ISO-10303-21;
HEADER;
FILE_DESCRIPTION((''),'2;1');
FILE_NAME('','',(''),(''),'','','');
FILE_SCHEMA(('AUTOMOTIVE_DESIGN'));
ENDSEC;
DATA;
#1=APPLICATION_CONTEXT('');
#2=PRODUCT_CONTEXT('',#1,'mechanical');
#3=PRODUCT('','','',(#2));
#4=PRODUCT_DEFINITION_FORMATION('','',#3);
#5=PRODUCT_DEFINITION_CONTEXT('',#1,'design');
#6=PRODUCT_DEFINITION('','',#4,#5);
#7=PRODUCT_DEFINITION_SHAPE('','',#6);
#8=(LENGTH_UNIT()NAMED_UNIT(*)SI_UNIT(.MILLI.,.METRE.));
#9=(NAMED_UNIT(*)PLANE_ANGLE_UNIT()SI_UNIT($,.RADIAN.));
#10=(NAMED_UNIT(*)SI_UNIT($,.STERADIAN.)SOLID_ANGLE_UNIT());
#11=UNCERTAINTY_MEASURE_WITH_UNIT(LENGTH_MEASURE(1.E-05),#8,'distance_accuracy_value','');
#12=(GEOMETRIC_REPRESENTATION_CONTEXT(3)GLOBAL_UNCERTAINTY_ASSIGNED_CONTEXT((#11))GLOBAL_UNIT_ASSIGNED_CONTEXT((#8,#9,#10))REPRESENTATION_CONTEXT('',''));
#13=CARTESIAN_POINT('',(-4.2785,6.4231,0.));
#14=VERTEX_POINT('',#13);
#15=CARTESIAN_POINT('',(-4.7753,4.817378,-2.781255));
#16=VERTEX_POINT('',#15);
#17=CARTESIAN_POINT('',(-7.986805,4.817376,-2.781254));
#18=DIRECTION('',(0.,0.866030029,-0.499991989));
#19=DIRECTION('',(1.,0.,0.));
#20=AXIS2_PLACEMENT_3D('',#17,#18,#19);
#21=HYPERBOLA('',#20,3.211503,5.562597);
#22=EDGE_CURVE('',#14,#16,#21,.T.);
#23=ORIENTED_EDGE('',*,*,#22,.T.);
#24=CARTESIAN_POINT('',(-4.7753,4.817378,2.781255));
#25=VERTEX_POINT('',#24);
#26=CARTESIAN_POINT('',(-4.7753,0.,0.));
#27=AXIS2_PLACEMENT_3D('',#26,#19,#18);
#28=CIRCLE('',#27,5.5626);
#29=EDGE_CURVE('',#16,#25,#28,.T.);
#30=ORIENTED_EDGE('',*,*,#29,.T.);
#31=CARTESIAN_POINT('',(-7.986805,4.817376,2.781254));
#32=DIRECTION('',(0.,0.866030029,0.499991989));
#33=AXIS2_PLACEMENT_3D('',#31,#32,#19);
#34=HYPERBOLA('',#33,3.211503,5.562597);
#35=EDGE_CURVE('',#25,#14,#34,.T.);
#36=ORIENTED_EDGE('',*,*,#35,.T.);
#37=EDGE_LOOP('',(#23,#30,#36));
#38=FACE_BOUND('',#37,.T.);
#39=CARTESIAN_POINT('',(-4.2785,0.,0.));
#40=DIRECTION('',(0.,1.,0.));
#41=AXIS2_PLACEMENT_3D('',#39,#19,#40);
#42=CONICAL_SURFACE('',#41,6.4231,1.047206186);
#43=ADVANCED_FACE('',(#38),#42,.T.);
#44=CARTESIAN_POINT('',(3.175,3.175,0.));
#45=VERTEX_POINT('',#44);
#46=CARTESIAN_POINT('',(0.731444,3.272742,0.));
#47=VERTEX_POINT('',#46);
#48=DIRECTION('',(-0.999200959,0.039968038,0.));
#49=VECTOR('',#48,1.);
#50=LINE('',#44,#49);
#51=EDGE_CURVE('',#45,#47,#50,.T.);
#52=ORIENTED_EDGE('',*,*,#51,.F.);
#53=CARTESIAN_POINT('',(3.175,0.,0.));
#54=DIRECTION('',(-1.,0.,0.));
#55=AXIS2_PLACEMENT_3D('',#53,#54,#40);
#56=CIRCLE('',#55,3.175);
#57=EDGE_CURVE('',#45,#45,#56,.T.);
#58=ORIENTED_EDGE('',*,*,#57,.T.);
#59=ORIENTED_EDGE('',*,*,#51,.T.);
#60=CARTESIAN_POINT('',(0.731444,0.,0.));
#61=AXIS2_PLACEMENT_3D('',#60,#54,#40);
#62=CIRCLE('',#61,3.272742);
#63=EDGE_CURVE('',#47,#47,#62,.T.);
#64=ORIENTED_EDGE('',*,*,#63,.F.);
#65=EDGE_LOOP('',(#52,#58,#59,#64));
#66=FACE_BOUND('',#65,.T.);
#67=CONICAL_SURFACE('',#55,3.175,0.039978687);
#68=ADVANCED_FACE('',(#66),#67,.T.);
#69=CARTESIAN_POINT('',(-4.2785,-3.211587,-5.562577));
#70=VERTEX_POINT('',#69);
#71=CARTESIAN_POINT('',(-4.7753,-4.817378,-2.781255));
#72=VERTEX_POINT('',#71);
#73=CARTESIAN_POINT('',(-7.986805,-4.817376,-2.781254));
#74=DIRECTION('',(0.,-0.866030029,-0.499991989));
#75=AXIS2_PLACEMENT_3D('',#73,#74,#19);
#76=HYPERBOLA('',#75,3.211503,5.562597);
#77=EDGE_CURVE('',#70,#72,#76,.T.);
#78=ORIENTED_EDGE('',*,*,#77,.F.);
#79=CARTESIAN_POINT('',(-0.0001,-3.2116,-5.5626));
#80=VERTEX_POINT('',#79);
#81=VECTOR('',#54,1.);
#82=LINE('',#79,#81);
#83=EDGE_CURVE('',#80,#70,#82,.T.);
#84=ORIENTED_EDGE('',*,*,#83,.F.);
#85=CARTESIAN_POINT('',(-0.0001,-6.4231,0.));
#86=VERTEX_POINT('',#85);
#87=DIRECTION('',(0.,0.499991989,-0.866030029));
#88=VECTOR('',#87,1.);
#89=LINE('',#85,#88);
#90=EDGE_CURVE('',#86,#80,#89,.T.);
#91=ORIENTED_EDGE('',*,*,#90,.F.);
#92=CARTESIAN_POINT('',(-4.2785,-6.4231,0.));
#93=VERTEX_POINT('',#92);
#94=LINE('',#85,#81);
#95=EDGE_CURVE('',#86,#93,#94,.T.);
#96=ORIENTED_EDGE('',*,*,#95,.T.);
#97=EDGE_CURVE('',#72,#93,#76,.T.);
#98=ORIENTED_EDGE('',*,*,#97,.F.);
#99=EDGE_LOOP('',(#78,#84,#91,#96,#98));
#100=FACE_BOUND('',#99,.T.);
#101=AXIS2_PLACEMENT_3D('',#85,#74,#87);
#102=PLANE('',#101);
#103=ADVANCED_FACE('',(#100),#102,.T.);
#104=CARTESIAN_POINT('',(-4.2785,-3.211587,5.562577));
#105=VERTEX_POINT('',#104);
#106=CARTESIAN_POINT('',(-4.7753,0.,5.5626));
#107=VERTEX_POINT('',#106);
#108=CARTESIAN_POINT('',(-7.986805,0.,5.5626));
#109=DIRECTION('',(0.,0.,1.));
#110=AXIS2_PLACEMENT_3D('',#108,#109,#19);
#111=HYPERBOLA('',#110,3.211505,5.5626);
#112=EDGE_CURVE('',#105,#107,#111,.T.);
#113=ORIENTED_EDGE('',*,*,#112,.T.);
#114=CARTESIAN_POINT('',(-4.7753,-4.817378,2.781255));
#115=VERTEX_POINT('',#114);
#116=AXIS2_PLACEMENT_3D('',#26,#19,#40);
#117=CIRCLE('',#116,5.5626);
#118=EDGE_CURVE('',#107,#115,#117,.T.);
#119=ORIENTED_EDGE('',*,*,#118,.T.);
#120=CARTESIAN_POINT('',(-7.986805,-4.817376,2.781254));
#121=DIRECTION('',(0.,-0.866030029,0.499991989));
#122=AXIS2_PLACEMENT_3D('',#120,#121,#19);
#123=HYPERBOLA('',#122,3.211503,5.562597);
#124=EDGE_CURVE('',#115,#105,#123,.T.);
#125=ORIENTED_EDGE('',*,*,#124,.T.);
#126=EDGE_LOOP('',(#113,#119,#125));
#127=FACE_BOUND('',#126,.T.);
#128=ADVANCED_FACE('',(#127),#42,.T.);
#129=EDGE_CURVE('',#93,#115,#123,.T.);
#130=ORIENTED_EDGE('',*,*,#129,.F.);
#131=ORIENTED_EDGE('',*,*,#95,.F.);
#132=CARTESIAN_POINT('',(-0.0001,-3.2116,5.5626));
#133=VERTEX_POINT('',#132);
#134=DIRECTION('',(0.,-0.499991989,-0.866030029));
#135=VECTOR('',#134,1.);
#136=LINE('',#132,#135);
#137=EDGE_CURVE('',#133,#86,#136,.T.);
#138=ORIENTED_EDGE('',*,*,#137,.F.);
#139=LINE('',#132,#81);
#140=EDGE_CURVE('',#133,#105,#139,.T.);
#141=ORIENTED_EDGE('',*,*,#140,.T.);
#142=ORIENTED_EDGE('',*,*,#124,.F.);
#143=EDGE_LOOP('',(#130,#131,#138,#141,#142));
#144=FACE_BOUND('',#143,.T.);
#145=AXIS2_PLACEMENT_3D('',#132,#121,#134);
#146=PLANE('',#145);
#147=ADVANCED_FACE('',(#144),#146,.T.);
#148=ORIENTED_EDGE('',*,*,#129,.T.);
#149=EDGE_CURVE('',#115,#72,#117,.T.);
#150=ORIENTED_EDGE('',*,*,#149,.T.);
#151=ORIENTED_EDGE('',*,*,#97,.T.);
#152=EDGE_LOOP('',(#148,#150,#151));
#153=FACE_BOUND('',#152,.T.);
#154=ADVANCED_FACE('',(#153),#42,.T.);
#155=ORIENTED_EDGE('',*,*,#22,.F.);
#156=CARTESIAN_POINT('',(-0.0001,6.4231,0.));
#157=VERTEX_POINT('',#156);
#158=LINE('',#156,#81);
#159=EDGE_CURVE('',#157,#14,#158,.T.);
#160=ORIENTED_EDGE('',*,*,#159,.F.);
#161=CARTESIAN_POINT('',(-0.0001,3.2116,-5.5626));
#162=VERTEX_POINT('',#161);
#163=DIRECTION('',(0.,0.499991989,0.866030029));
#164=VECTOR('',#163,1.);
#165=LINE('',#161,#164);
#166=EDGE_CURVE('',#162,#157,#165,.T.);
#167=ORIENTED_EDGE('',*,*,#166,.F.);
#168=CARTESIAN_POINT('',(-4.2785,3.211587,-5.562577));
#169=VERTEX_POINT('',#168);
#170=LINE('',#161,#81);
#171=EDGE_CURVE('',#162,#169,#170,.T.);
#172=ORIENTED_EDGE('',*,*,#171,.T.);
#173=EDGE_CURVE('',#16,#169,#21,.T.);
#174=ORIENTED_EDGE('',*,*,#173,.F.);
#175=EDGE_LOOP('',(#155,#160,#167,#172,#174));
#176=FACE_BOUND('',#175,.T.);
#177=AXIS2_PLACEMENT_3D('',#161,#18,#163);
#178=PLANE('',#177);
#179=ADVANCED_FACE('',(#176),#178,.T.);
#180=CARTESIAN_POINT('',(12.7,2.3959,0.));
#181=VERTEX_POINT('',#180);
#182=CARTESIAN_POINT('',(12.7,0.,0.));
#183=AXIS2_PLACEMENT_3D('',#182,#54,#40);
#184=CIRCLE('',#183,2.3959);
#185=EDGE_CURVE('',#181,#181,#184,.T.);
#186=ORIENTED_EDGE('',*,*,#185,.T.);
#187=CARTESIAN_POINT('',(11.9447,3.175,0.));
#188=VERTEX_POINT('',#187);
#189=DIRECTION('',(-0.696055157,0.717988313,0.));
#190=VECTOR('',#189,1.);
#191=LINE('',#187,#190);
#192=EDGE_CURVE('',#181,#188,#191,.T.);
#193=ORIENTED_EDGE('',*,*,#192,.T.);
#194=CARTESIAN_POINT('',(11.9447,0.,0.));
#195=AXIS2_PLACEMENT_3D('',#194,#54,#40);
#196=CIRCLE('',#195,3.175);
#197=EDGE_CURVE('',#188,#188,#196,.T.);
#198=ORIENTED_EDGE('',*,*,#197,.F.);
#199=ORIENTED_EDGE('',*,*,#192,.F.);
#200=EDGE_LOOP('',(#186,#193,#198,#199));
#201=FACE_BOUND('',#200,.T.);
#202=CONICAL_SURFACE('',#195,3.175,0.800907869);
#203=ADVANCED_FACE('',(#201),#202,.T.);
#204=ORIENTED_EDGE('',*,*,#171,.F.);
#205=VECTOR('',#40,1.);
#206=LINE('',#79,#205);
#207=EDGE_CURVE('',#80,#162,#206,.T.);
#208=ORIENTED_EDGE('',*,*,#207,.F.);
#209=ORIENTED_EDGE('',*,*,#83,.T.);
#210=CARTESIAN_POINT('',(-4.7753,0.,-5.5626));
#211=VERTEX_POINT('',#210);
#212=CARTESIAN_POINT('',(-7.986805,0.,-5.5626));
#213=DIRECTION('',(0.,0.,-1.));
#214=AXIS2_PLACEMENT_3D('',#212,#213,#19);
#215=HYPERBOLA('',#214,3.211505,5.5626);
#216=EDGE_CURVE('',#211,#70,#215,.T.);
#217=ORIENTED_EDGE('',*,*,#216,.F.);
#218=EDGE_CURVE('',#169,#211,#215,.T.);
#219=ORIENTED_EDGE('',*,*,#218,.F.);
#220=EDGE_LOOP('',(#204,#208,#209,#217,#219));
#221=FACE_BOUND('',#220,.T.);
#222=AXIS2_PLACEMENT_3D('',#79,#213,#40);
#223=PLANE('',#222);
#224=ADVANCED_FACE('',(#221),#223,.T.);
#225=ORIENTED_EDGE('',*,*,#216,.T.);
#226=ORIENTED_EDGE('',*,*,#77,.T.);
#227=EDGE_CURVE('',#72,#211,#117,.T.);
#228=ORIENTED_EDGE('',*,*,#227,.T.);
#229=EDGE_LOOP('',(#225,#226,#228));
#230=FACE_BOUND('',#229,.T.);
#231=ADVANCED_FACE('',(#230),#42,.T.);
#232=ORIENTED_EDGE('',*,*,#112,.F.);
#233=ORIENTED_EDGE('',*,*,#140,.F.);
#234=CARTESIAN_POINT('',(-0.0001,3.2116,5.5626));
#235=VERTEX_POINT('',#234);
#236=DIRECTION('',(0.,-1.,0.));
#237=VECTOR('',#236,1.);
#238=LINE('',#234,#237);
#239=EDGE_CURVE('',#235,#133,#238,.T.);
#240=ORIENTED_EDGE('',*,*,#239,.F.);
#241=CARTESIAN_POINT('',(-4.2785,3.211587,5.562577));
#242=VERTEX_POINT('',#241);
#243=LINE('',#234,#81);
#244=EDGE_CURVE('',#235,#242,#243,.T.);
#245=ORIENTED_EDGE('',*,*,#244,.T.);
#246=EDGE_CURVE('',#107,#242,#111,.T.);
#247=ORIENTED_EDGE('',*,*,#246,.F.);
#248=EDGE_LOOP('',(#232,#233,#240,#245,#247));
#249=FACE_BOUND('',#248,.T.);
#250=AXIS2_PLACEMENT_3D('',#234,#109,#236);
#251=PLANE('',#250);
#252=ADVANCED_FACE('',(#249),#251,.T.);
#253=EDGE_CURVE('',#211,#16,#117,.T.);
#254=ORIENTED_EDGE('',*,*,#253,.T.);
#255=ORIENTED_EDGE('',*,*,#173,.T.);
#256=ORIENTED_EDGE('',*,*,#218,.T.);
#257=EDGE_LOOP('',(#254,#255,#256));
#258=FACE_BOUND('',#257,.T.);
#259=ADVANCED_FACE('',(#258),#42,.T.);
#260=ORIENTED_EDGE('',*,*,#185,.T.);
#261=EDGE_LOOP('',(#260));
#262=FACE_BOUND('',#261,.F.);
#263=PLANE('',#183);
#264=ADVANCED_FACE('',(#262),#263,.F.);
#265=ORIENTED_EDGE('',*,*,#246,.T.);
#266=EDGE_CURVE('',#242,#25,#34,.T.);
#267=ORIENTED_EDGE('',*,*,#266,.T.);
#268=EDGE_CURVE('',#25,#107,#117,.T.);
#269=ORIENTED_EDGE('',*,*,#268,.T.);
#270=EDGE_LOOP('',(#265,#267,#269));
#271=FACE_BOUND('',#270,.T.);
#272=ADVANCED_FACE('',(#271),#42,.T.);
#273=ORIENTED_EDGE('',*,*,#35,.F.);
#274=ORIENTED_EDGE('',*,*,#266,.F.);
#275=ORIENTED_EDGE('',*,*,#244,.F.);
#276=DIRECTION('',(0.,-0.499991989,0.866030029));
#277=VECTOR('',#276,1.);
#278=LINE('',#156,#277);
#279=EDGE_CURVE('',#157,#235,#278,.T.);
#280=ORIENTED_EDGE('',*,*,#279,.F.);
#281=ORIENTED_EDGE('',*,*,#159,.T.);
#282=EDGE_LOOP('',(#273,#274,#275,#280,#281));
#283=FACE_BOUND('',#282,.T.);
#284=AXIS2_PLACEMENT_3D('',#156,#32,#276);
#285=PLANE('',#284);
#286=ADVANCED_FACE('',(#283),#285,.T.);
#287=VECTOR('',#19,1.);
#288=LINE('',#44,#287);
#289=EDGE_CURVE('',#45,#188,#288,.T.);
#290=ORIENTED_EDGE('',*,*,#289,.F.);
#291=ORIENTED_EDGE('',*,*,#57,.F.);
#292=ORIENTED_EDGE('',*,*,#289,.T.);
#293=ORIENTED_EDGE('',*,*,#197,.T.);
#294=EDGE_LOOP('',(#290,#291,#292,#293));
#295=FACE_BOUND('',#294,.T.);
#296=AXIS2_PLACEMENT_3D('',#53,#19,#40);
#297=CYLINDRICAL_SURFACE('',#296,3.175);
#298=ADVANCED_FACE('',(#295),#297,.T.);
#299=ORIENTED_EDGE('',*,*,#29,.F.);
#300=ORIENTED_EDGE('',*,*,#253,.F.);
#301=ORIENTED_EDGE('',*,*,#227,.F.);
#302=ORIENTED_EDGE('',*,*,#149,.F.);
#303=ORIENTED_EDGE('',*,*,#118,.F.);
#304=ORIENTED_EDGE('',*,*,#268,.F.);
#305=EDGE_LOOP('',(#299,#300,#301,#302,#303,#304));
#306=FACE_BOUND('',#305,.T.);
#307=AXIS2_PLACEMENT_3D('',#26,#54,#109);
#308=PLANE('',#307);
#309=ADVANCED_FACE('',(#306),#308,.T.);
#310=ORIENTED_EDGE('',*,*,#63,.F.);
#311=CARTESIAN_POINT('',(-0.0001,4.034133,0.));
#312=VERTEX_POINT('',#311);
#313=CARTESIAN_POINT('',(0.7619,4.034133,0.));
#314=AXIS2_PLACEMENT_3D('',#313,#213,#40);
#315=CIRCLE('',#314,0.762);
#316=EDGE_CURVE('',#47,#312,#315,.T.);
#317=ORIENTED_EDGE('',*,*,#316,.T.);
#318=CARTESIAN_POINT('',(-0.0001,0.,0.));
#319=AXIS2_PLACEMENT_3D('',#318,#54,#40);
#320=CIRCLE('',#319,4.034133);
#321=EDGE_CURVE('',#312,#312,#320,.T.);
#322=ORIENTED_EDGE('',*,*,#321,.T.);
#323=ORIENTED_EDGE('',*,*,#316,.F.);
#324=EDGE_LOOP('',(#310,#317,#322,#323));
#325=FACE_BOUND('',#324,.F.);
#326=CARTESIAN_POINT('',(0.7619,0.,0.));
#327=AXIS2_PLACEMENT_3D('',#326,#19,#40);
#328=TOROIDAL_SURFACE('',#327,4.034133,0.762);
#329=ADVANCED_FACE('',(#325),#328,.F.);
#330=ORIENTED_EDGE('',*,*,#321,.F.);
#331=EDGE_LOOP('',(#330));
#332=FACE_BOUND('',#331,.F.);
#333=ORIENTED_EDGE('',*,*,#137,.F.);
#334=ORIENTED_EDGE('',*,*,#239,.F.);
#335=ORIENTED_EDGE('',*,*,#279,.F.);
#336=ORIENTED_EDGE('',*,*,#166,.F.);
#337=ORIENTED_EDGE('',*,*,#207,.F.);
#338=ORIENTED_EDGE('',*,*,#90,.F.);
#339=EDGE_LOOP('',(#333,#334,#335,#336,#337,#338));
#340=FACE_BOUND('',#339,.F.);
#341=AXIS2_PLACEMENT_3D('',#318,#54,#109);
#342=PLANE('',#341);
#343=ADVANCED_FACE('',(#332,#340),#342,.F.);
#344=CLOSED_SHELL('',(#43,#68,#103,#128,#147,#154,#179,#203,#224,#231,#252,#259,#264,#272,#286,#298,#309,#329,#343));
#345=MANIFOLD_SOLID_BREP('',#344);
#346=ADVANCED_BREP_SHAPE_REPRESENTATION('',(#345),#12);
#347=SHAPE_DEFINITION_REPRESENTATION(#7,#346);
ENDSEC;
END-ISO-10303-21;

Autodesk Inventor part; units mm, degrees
ref_plane "YZ Plane" through (0, 0, 0) normal (1, 0, 0) x (0, 1, 0)
ref_plane "XZ Plane" through (0, 0, 0) normal (0, 1, 0) x (-1, 0, 0)
sketch "Sketch1" plane through (0, 0, 0) normal (0, 0, 1) x (1, 0, 0)
  line L0 (0, 5.5626) -> (0, 3.302)
  line L1 (3.175, 3.175) -> (12.7, 3.175)
  line L2 (12.7, 3.175) -> (12.7, 0)
  line L3 (12.7, 0) -> (-0.0001, 0)
  line L4 (-2.5401, 0) -> (15.24, 0) projected
  line L5 (-0.0001, 0) -> (-0.0001, 5.5626)
  line L6 (-0.0001, 5.5626) -> (0, 5.5626)
  line L7 (3.175, 3.175) -> (0.0019, 3.302)
  line L8 (0.0019, 3.302) -> (0, 3.302)
  line L9 (0, -1.1125) -> (0, 6.6751) projected
  dimension "d0" = 12.7
  dimension "d1" = 9.525
  dimension "d2" = 6.35
  dimension "d9" = 0.0001
  dimension "d10" = 11.1252
  dimension "d13" = 3.1731
  dimension "d14" = 6.604
revolve "Body" add sketch "Sketch1" angle 360 about axis through (12.7, 0, 0) along (-1, 0, 0)
sketch "Sketch2" plane through (-0.0001, 0, 0) normal (-1, 0, 0) x (0, 0, 1)
  line L0 (0, 6.4231) -> (5.5626, 3.2116)
  line L1 (5.5626, 3.2116) -> (5.5626, -3.2116)
  line L2 (5.5626, -3.2116) -> (0, -6.4231)
  line L3 (0, -6.4231) -> (-5.5626, -3.2116)
  line L4 (-5.5626, -3.2116) -> (-5.5626, 3.2116)
  line L5 (-5.5626, 3.2116) -> (0, 6.4231)
  point P0 (0, 0)
  point P1 (0, 0)
  dimension "d11" = 11.1252
extrude "Head" add sketch "Sketch2" along normal blind 4.7752
sketch "Sketch4" plane through (0, 0, 0) normal (0, 0, 1) x (1, 0, 0)
  line L0 (-4.7753, 5.5626) -> (-4.7753, 6.4231)
  line L1 (-4.7753, 6.4231) -> (-4.2785, 6.4231)
  line L2 (-4.2785, 6.4231) -> (-4.7753, 5.5626)
  line L3 (-5.7303, 0) -> (0.9549, 0) projected
  line L4 (-0.0001, 6.4231) -> (-4.7753, 6.4231) projected
  line L5 (-4.7753, 3.2116) -> (-4.7753, 6.4231) projected
  dimension "d5" = 30
  dimension "d19" = 11.1252
revolve "Chamfer1" cut sketch "Sketch4" angle 360 about axis through (-10, 0, 0) along (1, 0, 0)
thread "Thread" size "1/4-20 UNC" class "2A" standard "ANSI Unified Screw Threads" length 9.525
chamfer "Chamfer2" distance 0.7791 distance2 0.7553 1 edges at (12.7, -3.175, 0) measured on face at (12.7, 1.0276, -1.1503)
ref_plane "Work Plane1" through (1.525, 0, 0) normal (0, 0, 1) x (1, 0, 0)
fillet "Fillet2" radius 0.762 1 edges at (0.0019, -3.302, 0)
equation "\"d0\" = NLG"
equation "\"d1\" = GEL"
equation "\"d2\" = GD"
equation "\"d10\" = SD2"
equation "\"d14\" = BDM"
equation "\"d11\" = SW"
equation "\"d3\" = KOH - SD"
equation "\"d5\" = ANG1"
equation "\"d19\" = SW0"
equation "\"d63\" = R"
equation "\"d15\" = GEL"
equation "\"d6\" = -0.5 * SPD + 0.5 * GD"
equation "\"NLG\" = 12.7"
equation "\"GD\" = NND"
equation "\"BDM\" = 6.604"
equation "\"KOH\" = 4.7752"
equation "\"GEL\" = 9.525"
equation "\"SW\" = 11.1252"
equation "\"SW0\" = SW"
equation "\"SPD\" = GD1"
equation "\"SD2\" = SW"
equation "\"SD\" = 0"
equation "\"ANG1\" = 30deg"
equation "\"GAL\" = 3.173"
equation "\"GUL\" = 0.238 * GAL"
equation "\"R\" = 0.762"
equation "\"d62\" = -NLG - SD + GUL"
equation "\"GD1\" = 4.79184"
equation "\"THREADDIA\" = 6.35"
equation "\"TOA\" = 30deg"
equation "\"NND\" = 6.35"
equation "\"E0\" = 1.155 * SW"
properties part number "ANSI/ASME B18.2.1 - 1/4-20 UNC - 0.5" material "Steel, Mild"
